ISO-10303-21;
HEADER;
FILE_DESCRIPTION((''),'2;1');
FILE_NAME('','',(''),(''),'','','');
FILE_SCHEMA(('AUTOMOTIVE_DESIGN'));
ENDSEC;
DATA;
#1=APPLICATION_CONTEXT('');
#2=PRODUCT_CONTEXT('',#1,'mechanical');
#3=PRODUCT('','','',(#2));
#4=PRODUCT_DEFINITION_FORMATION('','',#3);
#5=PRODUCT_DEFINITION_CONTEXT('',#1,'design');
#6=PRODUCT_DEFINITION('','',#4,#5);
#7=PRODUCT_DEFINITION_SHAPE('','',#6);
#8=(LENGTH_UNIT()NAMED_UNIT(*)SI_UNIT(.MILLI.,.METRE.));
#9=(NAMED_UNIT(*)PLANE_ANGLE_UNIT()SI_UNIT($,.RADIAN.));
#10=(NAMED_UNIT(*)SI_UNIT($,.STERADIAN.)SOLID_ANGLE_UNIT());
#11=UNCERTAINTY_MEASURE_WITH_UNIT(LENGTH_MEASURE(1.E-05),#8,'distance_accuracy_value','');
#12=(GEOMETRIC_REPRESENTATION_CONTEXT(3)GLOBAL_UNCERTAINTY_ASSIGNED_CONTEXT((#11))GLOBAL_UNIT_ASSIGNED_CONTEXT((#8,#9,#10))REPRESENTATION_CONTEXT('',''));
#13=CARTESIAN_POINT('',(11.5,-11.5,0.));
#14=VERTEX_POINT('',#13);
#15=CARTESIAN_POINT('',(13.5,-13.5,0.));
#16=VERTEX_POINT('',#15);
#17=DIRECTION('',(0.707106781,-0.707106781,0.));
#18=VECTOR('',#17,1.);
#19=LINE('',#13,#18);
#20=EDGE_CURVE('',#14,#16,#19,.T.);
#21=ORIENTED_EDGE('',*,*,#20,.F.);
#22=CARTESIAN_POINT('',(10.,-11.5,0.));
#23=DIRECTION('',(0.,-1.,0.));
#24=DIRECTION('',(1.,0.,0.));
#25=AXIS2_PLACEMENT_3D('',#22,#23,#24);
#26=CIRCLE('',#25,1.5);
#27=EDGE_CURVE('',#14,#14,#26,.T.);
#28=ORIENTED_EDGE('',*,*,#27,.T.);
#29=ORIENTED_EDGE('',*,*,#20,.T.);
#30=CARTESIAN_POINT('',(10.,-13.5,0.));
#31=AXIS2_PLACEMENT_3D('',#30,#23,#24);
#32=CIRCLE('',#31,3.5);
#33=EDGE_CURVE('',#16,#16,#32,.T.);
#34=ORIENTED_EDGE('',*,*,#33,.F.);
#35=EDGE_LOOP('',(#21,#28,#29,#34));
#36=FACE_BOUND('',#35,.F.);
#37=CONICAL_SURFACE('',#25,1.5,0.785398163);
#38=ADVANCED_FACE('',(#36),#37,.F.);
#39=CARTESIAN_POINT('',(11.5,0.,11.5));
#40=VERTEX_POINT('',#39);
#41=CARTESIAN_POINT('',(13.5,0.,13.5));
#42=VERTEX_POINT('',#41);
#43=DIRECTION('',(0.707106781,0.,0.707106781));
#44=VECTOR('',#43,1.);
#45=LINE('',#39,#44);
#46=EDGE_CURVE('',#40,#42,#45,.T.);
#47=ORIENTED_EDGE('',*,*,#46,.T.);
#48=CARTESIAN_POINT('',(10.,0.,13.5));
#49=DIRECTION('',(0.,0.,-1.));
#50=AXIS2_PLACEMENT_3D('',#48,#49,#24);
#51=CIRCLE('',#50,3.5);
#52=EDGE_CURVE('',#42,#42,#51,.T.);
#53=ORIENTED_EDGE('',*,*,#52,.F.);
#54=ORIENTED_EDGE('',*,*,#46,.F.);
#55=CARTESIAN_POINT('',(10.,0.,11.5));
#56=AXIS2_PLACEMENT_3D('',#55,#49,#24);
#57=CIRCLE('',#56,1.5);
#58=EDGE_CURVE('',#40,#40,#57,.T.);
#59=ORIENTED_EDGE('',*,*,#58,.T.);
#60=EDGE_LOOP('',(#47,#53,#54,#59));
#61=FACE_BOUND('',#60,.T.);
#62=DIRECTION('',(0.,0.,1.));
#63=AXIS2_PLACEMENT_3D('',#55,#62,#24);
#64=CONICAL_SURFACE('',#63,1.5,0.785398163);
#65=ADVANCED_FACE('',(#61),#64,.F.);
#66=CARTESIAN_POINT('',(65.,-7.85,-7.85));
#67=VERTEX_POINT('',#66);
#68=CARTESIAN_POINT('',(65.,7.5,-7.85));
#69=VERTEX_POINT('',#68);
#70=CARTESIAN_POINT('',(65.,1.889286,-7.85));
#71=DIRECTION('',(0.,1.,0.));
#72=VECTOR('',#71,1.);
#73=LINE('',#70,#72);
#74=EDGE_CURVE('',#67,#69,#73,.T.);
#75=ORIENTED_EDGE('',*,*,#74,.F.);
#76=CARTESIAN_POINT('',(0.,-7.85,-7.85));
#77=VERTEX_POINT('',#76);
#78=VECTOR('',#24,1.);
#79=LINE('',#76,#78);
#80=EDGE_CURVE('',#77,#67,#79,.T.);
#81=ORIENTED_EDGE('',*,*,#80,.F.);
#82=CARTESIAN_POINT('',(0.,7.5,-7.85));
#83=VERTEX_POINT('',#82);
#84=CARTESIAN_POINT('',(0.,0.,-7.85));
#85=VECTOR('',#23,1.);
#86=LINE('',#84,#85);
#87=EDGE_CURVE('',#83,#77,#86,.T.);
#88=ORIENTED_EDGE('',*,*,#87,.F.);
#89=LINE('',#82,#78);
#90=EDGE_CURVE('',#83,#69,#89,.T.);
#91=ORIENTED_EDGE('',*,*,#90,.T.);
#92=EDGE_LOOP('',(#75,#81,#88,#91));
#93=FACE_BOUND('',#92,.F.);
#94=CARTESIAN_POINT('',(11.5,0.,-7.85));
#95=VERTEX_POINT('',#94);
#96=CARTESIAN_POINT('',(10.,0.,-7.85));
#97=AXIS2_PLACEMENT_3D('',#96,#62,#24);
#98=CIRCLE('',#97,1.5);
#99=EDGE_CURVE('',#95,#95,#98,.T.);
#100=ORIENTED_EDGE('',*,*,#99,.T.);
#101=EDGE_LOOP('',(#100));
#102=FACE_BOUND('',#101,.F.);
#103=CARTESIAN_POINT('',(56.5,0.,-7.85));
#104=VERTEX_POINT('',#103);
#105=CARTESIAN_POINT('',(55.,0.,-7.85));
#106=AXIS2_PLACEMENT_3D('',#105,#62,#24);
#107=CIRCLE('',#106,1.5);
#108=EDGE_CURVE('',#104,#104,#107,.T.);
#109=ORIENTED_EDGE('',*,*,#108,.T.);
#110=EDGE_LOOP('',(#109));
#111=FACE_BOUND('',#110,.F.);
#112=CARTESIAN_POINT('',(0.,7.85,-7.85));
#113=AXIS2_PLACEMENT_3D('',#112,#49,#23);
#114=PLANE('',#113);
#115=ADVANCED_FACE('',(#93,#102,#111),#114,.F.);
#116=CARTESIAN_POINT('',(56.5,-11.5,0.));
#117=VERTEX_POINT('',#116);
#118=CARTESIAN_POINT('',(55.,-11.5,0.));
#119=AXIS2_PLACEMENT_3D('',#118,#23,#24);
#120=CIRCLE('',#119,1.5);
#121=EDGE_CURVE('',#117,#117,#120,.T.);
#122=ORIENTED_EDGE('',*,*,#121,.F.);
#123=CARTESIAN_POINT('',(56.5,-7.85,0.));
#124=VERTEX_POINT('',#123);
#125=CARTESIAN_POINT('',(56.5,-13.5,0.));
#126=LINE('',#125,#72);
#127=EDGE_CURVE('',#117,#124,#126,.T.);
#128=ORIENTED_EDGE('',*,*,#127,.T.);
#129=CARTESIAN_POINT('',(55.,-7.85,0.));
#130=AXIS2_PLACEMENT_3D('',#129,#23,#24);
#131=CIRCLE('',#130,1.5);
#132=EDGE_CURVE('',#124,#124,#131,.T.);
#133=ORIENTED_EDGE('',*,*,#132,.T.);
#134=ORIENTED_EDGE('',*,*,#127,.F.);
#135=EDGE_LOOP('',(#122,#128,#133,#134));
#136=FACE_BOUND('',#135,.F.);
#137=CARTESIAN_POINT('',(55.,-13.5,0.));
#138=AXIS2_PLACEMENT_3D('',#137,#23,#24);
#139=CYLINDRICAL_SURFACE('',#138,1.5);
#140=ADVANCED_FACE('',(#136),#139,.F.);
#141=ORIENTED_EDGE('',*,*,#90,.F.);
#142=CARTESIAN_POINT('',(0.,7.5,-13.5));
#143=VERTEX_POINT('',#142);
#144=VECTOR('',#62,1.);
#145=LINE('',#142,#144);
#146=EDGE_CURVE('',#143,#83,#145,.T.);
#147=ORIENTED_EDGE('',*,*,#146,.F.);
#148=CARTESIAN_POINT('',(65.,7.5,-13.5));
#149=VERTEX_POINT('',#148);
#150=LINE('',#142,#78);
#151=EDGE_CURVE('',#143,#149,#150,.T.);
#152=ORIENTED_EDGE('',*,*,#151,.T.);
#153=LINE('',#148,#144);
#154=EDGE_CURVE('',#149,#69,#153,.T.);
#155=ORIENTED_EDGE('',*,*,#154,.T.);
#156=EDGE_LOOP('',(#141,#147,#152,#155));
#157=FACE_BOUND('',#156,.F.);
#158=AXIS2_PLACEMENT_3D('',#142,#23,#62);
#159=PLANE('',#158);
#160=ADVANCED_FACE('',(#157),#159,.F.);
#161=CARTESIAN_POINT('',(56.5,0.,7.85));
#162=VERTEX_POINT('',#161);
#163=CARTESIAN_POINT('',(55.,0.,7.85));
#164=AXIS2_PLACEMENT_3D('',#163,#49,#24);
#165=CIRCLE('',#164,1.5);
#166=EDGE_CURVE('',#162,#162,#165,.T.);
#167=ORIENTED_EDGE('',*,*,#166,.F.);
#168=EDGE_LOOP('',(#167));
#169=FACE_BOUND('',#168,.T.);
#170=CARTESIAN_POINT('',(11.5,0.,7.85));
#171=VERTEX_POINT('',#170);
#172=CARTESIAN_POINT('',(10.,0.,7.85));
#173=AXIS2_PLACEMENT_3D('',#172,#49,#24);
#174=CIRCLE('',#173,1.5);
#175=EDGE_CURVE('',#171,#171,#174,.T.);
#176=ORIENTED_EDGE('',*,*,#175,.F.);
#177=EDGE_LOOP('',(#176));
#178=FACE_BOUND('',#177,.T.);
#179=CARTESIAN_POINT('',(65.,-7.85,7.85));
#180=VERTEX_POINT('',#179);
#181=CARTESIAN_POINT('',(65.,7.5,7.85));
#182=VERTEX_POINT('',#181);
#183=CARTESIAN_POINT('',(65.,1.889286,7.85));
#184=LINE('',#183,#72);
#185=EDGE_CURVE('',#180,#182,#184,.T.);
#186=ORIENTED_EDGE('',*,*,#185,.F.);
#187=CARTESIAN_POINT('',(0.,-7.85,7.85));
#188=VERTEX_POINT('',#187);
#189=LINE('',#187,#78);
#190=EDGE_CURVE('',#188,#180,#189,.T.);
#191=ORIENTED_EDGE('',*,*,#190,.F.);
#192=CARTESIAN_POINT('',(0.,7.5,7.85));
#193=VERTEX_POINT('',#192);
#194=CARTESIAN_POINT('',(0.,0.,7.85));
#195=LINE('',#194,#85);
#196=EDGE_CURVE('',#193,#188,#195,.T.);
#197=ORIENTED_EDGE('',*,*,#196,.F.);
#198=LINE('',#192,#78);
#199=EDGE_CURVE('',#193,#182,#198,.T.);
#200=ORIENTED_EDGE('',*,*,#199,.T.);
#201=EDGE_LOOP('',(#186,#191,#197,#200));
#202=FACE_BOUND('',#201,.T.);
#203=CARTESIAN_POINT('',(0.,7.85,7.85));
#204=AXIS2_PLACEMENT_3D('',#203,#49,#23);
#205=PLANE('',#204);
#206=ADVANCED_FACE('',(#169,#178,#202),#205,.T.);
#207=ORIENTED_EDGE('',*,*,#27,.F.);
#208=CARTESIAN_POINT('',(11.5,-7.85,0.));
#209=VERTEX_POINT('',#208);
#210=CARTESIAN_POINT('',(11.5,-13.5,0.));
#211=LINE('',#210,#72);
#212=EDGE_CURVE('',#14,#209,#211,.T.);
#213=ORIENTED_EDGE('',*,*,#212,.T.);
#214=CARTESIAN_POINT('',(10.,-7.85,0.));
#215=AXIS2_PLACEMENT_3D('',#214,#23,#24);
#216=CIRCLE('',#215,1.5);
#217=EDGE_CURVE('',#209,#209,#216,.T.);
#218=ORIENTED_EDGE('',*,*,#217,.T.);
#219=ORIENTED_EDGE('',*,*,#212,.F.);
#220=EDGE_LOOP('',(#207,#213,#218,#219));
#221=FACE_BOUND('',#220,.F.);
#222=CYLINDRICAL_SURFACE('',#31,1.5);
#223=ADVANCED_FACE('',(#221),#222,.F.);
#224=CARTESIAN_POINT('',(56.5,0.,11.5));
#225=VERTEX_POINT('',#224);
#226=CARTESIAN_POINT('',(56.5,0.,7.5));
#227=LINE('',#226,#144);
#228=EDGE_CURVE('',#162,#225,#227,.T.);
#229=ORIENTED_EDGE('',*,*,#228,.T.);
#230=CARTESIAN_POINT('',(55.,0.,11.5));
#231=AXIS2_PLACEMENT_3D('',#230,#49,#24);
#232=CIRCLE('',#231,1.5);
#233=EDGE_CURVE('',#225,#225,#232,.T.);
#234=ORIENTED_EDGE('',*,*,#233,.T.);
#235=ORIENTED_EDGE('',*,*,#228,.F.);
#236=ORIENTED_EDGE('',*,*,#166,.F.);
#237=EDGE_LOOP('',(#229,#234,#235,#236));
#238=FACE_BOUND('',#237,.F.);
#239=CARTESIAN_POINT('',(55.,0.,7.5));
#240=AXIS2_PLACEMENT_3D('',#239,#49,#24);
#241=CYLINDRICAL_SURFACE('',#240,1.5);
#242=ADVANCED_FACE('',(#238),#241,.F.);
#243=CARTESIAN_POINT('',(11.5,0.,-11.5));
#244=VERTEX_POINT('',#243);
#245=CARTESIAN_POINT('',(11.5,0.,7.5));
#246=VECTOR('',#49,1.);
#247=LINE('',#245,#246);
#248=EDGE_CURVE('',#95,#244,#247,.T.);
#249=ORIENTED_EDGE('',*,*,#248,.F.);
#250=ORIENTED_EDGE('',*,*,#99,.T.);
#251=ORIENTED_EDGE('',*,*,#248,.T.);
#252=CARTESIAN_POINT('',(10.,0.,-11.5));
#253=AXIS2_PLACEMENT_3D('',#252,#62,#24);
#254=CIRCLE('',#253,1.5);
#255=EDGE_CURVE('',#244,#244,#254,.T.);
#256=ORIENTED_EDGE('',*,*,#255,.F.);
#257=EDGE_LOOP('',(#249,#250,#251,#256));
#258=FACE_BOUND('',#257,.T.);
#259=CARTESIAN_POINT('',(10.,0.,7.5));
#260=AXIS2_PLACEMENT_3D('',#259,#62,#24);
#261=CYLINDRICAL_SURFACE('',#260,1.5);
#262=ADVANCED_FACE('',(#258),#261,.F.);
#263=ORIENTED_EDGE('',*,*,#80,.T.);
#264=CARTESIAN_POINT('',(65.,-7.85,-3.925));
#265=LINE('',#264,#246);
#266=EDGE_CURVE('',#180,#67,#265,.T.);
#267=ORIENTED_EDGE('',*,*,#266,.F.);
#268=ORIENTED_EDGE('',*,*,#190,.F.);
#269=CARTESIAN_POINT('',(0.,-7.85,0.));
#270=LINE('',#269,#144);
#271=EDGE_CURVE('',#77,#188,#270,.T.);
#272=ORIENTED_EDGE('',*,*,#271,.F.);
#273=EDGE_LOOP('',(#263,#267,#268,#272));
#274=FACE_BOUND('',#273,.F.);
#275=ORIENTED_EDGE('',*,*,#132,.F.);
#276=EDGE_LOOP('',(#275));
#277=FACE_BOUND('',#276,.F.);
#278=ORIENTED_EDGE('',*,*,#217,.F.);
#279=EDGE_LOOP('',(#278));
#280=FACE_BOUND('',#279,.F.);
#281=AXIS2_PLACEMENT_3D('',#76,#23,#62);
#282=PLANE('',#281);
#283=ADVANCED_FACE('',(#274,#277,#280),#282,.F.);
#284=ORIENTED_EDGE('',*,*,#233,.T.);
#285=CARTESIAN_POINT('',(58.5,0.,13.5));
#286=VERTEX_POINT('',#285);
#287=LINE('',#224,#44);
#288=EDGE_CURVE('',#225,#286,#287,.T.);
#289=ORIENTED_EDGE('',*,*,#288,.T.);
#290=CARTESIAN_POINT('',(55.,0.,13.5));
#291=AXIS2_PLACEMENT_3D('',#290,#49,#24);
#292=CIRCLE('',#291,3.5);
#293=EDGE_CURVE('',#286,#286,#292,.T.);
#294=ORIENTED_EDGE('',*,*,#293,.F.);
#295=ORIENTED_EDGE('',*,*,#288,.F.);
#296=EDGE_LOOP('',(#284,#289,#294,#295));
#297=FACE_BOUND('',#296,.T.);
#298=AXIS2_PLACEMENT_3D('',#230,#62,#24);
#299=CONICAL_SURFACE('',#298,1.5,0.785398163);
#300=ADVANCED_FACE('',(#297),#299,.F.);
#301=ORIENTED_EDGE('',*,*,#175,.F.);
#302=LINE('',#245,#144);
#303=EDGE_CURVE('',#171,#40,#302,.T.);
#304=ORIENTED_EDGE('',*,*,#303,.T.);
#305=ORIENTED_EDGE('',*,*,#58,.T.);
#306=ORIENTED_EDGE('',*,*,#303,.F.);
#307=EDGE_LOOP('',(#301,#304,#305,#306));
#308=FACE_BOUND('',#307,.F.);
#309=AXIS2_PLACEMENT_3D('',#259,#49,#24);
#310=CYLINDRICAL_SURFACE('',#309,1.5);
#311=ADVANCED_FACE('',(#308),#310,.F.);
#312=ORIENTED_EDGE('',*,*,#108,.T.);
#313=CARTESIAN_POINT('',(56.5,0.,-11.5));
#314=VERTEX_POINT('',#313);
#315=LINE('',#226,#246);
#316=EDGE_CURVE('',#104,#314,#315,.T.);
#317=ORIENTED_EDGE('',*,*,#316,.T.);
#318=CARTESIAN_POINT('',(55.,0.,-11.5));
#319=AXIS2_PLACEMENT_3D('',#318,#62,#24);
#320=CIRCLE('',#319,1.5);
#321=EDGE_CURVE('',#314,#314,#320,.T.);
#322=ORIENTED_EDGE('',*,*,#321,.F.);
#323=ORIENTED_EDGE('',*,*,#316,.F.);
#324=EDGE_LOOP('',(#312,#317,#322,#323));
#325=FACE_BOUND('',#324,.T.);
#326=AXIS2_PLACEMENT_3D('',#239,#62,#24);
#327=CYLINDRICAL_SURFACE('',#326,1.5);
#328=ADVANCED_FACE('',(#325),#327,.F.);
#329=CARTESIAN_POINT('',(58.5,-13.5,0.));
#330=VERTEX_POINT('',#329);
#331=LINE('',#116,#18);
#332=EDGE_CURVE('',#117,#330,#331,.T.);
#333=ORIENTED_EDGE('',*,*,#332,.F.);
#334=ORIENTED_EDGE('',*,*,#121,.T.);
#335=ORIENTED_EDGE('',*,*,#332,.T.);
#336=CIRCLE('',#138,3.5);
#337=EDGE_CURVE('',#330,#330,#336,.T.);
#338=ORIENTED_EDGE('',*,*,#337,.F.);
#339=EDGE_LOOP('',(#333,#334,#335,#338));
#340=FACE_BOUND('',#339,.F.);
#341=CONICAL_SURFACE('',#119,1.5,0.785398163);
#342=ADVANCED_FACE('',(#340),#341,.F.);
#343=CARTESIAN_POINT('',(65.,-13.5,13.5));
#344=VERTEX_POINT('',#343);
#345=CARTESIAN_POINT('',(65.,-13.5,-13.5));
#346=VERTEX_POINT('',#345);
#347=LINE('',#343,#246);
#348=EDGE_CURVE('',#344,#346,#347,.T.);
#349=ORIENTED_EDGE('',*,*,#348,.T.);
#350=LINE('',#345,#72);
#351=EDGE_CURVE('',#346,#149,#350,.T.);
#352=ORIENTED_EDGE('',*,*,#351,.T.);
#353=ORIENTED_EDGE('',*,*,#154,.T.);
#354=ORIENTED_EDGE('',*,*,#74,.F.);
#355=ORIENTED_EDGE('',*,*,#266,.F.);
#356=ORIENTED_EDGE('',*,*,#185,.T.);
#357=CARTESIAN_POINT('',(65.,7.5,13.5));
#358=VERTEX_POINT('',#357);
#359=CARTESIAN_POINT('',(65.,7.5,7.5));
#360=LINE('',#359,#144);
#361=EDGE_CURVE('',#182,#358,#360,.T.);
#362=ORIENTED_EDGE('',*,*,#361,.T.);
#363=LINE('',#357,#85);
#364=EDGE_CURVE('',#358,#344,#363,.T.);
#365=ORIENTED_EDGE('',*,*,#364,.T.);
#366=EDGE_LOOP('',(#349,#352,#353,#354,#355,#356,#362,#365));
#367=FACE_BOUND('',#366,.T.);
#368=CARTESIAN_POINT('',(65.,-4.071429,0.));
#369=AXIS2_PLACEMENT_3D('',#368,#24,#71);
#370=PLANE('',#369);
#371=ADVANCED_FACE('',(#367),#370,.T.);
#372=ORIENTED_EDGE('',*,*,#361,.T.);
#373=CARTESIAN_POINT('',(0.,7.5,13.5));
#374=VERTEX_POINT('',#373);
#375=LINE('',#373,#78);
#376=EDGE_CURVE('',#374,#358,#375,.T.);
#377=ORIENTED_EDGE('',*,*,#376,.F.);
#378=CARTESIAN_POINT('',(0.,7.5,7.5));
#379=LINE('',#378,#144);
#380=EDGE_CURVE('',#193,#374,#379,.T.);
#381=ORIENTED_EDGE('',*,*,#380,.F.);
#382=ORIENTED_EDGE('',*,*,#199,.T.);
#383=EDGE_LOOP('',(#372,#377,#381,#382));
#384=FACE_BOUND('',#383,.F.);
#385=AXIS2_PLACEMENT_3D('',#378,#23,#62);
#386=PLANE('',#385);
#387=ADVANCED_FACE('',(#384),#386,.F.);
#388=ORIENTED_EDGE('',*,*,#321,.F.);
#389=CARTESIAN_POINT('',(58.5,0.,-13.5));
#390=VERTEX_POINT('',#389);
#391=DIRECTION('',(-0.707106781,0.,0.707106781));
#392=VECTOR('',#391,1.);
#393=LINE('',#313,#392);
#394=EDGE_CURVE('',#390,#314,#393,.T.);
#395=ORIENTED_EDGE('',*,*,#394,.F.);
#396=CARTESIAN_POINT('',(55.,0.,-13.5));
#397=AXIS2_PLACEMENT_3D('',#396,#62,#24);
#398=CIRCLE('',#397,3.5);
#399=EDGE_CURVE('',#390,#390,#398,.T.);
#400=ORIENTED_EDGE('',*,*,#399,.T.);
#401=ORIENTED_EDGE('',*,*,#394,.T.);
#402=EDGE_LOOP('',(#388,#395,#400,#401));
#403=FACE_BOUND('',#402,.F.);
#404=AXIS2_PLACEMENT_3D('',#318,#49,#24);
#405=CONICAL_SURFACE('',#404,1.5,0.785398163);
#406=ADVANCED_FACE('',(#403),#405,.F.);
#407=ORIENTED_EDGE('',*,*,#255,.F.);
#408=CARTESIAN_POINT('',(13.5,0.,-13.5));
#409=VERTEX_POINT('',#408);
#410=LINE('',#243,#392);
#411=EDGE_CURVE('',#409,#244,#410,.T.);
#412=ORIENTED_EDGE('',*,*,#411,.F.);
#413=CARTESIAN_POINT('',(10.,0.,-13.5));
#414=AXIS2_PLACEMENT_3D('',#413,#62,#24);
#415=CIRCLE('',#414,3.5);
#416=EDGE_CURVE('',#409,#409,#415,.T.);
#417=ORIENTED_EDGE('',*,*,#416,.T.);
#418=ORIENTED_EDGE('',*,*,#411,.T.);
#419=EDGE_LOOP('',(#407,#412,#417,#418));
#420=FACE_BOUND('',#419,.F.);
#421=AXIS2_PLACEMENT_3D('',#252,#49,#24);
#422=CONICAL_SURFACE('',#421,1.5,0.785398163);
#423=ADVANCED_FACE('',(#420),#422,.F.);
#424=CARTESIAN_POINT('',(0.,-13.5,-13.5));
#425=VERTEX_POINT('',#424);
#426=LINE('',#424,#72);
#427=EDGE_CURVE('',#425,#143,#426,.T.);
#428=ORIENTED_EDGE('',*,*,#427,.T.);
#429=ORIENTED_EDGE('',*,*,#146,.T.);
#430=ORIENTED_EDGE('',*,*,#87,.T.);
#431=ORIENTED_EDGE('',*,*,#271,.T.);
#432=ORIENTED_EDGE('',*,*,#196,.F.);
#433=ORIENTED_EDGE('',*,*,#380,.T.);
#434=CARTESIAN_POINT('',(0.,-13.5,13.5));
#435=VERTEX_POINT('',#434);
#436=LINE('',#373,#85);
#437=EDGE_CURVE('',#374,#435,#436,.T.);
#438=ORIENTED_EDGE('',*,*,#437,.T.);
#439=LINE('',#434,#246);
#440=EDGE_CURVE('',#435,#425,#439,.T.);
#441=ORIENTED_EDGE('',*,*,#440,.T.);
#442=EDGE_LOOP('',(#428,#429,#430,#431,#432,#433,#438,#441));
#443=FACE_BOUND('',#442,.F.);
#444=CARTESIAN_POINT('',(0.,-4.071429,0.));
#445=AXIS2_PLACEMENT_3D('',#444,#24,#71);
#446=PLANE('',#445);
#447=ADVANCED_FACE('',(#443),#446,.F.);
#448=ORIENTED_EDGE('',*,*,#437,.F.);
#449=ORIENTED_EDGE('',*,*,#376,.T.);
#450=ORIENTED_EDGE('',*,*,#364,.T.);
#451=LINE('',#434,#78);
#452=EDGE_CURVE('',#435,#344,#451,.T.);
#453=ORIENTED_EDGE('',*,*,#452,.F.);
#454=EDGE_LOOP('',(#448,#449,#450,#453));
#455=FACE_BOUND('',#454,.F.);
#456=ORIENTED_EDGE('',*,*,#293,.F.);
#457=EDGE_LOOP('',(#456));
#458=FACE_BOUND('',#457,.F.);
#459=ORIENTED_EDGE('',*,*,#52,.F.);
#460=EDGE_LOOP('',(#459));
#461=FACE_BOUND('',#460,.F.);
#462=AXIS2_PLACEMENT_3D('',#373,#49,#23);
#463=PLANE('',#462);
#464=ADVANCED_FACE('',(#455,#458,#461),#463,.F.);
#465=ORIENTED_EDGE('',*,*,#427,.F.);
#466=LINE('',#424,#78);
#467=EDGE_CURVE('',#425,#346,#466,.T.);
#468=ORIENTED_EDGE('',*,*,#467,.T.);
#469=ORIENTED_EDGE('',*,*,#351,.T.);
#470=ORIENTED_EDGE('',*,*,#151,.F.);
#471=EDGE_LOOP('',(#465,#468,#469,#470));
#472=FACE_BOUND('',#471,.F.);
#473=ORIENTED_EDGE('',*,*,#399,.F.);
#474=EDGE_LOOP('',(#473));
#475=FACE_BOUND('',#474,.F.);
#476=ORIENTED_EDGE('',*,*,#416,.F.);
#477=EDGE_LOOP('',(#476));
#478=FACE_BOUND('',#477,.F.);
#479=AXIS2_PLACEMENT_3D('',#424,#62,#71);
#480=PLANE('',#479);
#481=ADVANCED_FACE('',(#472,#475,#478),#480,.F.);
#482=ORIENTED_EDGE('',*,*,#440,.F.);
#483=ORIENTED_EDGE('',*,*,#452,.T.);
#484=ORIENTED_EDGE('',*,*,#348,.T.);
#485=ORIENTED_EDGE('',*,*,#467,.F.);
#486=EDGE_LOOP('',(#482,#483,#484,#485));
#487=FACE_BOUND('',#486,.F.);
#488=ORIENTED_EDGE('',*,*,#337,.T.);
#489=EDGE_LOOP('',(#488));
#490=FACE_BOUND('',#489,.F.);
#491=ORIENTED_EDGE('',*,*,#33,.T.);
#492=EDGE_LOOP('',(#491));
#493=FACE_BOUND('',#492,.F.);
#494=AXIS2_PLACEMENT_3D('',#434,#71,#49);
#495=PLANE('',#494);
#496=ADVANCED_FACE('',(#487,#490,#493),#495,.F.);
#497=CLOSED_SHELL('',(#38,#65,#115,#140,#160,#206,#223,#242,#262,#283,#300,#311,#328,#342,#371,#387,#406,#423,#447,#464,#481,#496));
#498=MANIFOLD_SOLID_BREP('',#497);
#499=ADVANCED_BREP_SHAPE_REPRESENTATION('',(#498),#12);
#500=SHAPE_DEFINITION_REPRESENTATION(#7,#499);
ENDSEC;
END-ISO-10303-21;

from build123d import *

# Parameters (mm, degrees)
F1_DEPTH      = 65
F2_R          = 1.5
F3_DEPTH      = 21.001
F4_R          = 1.5
F5_DEPTH      = 21.001
F5_DEPTH_BACK = 6.001
F6_SIZE       = 2
F7_W          = 15.7
F7_H          = 15.7
F8_DEPTH      = 65.001


with BuildPart() as f1:
    # F0 (on Right) → F1 (new body)
    with BuildSketch(Plane.YZ):
        Polygon((-7.5, 7.5), (7.5, 7.5), (7.5, 13.5), (-13.5, 13.5), (-13.5, -13.5), (7.5, -13.5), (7.5, -7.5), (-7.5, -7.5), align=None)
    extrude(amount=F1_DEPTH)

    # F2 (on face) → F3 (cut, through all)
    with BuildSketch(Plane.XZ.offset(13.5)):
        with Locations((10, 0)):
            Circle(F2_R)
        with Locations((55, 0)):
            Circle(F2_R)
    extrude(amount=-F3_DEPTH, mode=Mode.SUBTRACT)

    # F4 (on face) → F5 (cut, two sides)
    with BuildSketch(Plane(origin=(0, 0, 7.5), x_dir=(1, 0, 0), z_dir=(0, 0, -1))) as f5_sk:
        with Locations((55, 0)):
            Circle(F4_R)
        with Locations((10, 0)):
            Circle(F4_R)
    extrude(amount=F5_DEPTH, mode=Mode.SUBTRACT)
    extrude(f5_sk.sketch, amount=-F5_DEPTH_BACK, mode=Mode.SUBTRACT)

    # F6
    f6_edges = [f1.edges().sort_by_distance(p)[0] for p in [
        (53.5, 0, 13.5),
        (8.5, 0, 13.5),
        (8.5, -13.5, 0),
        (53.5, -13.5, 0),
        (53.5, 0, -13.5),
        (8.5, 0, -13.5),
    ]]
    chamfer(f6_edges, length=F6_SIZE)

    # F7 (on face) → F8 (cut, through all)
    with BuildSketch(Plane(origin=(0, 0, 0), x_dir=(0, -1, 0), z_dir=(-1, 0, 0))):
        Rectangle(F7_W, F7_H)
    extrude(amount=-F8_DEPTH, mode=Mode.SUBTRACT)


solid = f1.part
